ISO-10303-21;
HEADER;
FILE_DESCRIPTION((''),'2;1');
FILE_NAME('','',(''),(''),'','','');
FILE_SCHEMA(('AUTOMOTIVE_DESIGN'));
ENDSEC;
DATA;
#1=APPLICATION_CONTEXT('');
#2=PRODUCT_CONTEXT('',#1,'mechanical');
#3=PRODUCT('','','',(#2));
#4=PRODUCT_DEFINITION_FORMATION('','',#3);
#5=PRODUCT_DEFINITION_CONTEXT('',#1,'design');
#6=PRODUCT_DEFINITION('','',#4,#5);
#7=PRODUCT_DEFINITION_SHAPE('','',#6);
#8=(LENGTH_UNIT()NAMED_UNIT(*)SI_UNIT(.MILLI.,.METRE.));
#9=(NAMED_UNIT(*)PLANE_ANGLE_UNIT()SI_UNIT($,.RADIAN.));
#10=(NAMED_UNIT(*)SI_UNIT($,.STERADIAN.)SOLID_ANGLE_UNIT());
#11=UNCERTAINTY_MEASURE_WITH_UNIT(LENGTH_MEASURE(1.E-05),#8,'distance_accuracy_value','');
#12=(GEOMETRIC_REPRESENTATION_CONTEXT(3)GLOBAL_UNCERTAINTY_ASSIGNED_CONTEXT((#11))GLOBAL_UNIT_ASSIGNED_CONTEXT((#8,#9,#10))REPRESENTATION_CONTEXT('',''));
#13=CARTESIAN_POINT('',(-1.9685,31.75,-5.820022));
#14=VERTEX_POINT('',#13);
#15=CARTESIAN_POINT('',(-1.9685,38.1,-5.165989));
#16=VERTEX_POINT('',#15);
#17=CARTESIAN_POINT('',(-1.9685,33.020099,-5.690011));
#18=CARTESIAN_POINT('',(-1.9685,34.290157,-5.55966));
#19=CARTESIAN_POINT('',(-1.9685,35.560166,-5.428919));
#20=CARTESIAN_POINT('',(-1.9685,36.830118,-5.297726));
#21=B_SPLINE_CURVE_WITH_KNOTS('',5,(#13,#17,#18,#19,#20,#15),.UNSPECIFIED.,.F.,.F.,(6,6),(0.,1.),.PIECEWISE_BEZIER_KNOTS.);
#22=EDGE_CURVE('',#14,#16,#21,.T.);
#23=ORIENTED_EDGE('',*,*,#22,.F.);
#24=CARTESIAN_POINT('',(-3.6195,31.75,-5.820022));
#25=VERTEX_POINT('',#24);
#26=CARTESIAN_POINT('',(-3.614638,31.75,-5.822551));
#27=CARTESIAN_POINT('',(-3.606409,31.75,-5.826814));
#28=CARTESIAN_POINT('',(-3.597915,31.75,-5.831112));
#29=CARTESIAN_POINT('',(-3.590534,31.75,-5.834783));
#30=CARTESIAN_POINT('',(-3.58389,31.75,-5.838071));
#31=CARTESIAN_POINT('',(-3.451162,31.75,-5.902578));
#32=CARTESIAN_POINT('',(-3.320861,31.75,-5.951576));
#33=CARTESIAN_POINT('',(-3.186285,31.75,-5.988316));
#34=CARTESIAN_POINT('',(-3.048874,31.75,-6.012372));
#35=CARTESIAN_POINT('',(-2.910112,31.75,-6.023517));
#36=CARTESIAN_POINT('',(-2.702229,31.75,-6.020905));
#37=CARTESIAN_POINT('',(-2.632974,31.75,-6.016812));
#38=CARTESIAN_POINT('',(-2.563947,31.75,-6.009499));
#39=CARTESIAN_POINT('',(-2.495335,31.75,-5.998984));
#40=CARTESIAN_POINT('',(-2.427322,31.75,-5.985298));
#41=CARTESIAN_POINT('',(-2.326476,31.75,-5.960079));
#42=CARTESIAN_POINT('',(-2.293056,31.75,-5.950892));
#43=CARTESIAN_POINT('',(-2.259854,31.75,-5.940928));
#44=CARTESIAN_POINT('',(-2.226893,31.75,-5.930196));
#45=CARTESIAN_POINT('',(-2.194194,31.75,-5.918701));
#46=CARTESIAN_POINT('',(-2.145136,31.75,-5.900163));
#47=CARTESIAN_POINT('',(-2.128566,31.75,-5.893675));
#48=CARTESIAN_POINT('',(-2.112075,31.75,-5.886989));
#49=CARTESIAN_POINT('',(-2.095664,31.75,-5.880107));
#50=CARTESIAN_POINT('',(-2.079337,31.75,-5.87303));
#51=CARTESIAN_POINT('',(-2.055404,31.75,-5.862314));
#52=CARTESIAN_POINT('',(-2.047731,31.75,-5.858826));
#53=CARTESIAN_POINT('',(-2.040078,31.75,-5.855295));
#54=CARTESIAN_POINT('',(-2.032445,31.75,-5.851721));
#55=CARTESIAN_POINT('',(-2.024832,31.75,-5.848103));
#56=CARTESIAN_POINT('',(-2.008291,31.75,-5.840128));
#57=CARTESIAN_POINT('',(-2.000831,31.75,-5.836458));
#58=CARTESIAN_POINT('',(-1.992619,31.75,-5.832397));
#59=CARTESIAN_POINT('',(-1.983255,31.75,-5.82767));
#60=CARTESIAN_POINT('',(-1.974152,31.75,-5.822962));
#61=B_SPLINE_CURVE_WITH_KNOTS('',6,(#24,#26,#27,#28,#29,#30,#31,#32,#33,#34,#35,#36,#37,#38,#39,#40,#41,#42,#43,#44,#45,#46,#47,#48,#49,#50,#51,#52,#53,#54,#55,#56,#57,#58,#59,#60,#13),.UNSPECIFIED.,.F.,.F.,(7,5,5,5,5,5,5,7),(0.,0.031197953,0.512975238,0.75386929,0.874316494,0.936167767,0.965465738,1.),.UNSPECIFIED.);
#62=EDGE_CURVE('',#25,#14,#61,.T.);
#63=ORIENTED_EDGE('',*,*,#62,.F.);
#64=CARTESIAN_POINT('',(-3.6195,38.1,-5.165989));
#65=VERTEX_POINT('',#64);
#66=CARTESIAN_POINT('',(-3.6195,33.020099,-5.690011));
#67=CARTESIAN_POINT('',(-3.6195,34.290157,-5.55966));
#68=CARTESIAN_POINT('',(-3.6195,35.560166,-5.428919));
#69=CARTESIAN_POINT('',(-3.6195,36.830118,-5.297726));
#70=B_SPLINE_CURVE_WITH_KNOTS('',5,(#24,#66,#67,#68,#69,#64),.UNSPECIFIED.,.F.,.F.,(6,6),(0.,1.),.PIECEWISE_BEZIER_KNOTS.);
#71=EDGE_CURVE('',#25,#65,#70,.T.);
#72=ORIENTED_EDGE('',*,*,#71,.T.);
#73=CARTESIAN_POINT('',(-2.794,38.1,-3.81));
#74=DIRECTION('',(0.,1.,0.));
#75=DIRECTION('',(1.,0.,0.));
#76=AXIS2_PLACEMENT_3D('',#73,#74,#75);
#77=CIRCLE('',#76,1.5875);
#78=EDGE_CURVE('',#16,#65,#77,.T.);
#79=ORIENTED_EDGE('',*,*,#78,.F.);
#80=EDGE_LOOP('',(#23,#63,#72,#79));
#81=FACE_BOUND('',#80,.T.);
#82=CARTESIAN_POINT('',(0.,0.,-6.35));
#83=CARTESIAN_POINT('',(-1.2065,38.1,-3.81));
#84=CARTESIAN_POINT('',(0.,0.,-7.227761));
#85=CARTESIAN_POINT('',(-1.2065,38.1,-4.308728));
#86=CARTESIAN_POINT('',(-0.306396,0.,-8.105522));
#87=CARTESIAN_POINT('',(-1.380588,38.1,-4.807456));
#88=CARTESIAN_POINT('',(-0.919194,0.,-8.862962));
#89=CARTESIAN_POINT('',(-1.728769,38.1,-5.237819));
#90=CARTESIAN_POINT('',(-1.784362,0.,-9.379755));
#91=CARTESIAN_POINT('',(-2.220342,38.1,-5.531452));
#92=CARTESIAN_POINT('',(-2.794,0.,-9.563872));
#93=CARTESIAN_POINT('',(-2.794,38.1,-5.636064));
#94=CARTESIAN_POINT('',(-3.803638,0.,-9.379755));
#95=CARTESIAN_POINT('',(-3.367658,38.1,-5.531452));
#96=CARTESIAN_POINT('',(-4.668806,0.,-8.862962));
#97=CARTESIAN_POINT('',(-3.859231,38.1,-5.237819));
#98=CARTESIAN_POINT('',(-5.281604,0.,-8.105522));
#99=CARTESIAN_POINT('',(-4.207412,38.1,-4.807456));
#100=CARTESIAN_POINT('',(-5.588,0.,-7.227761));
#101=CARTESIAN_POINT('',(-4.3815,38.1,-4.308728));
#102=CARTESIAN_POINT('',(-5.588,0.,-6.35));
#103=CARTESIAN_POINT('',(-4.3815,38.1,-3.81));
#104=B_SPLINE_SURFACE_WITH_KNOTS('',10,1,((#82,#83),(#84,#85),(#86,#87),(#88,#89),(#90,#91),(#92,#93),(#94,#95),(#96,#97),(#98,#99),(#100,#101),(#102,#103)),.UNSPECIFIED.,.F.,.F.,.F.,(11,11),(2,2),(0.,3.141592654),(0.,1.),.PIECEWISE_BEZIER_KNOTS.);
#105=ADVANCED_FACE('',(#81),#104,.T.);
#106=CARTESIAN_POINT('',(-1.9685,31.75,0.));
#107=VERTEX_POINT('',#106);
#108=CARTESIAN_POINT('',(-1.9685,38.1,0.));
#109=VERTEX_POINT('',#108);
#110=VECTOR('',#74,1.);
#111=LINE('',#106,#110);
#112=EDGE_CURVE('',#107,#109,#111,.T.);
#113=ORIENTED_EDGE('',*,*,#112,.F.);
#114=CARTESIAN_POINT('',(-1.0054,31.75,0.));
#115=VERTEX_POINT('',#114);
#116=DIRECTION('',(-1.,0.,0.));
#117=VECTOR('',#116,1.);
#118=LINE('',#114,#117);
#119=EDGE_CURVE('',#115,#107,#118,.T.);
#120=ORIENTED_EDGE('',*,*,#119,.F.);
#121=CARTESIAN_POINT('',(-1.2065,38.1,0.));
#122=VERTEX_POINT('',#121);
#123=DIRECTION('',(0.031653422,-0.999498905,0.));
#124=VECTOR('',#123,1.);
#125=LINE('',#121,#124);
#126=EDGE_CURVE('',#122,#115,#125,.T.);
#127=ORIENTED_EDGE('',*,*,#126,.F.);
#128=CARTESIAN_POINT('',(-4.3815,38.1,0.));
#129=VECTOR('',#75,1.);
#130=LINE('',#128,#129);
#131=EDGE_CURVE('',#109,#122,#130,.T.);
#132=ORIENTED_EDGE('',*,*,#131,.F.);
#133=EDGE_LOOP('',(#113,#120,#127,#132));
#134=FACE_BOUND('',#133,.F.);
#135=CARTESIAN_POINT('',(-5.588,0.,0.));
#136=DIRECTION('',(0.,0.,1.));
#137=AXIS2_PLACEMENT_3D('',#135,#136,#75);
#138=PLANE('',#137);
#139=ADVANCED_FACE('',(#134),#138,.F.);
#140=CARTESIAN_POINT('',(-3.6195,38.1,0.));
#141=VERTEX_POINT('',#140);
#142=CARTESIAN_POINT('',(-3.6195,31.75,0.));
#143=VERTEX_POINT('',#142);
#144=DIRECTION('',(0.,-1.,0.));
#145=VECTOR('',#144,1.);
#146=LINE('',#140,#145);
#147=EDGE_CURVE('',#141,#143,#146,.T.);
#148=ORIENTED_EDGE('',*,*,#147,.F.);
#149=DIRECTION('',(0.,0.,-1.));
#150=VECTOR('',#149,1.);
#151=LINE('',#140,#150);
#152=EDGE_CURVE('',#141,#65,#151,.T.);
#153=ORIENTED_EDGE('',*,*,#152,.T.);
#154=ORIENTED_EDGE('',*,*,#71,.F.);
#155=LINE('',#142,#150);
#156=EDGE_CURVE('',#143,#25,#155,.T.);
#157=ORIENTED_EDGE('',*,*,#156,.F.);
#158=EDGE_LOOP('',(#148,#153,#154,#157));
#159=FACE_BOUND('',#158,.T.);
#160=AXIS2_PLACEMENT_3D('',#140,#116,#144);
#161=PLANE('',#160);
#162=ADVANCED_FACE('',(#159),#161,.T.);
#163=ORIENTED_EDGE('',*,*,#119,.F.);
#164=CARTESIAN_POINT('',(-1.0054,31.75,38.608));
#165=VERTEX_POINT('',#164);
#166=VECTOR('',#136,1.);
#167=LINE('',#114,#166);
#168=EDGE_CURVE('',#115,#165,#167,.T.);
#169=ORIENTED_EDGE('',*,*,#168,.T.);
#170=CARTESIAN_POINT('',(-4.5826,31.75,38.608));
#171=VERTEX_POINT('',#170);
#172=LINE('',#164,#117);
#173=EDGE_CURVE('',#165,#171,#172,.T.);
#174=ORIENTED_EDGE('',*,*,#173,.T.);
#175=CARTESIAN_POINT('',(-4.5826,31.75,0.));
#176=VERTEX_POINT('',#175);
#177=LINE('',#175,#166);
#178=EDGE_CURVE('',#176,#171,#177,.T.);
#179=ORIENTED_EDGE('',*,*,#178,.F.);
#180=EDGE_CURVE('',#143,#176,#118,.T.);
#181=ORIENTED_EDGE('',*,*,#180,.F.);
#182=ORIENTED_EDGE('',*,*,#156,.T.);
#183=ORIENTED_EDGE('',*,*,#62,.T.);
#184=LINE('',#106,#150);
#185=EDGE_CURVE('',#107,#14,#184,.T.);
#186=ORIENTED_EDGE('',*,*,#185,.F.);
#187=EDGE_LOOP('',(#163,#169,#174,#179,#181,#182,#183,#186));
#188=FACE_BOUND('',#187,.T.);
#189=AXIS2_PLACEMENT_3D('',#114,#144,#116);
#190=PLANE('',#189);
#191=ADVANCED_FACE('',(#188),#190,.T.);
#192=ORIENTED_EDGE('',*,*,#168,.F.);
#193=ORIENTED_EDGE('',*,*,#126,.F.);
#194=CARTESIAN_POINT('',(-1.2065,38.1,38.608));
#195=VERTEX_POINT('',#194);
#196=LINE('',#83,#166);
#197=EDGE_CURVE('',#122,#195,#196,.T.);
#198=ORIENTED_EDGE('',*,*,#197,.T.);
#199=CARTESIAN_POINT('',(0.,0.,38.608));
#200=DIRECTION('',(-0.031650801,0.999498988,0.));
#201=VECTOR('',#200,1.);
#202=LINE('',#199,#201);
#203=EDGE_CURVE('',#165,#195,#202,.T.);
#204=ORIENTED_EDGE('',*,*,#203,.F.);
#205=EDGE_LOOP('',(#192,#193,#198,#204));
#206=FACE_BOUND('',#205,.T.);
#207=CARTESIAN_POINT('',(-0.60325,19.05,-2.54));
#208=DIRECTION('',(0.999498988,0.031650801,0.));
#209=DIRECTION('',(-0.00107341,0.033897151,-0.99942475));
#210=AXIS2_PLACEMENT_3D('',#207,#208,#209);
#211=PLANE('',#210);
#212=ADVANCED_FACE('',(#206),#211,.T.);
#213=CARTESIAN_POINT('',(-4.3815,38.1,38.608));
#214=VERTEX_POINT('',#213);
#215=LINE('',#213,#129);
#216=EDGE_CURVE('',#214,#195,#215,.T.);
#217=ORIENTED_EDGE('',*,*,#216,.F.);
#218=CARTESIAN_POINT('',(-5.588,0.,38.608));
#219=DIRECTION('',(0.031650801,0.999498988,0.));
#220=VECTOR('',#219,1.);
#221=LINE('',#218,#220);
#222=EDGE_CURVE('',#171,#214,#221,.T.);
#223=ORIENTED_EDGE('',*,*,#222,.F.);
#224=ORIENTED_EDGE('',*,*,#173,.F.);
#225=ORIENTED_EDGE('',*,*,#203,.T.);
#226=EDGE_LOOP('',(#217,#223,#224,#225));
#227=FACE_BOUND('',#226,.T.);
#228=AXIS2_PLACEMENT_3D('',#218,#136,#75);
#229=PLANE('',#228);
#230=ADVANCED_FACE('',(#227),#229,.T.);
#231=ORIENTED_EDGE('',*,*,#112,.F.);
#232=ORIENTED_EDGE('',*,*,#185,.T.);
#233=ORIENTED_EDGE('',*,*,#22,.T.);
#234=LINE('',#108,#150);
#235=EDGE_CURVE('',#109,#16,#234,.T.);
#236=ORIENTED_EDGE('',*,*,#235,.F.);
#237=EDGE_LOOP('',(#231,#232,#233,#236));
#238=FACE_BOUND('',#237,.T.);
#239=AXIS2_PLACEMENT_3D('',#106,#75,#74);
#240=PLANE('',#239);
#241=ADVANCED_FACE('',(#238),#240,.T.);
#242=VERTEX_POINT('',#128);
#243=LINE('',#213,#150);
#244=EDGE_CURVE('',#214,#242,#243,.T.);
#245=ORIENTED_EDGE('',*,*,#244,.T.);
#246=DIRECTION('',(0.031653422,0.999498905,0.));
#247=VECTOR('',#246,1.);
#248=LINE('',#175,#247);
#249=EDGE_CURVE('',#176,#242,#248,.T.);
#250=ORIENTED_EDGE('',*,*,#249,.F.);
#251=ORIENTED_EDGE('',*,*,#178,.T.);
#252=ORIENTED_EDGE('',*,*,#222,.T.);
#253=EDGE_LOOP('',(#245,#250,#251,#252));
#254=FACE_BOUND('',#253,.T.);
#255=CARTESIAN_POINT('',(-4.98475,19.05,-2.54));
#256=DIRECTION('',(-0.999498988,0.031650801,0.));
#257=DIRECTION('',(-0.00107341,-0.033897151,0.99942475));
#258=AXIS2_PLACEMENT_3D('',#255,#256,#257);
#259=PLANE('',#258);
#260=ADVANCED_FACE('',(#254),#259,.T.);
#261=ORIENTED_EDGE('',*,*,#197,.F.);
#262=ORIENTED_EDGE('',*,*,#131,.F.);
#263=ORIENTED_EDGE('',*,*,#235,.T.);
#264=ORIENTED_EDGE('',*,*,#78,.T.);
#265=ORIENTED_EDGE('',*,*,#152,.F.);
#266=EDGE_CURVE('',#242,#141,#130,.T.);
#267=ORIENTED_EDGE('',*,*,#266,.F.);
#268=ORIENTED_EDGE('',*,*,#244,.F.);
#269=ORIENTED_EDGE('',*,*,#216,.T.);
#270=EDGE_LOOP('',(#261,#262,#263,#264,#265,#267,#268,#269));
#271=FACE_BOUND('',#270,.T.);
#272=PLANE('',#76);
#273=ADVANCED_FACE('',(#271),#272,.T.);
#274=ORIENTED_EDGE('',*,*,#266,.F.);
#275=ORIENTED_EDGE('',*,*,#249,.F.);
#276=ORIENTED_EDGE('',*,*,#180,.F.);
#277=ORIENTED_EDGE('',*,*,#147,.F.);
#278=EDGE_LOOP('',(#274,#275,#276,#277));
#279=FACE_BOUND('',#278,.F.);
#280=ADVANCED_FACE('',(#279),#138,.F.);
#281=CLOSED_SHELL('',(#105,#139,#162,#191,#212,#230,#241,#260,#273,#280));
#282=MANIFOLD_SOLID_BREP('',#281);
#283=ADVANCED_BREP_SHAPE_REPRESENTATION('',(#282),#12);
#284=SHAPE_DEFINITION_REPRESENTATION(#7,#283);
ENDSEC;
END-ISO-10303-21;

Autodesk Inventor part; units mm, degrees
ref_plane "YZ Plane" through (0, 0, 0) normal (1, 0, 0) x (0, 1, 0)
ref_plane "XY Plane" through (0, 0, 0) normal (0, 0, 1) x (1, 0, 0)
sketch "Sketch6" plane through (0, 0, 0) normal (0, 1, 0) x (-1, 0, 0)
  line L0 (0, 0) -> (5.588, 0)
  line L1 (5.588, 0) -> (5.588, -6.35)
  line L2 (5.588, -6.35) -> (0, -6.35)
  line L3 (0, -6.35) -> (0, 0)
  arc A0 (0, -6.35) -> (5.588, -6.35) centre (2.794, -6.35) ccw
  dimension "d25" = 5.588
  dimension "d26" = 6.35
ref_plane "Work Plane1" through (0, 38.1, 0) normal (0, 1, 0) x (-1, 0, 0)
sketch "Sketch8" plane through (0, 38.1, 0) normal (0, 1, 0) x (-1, 0, 0)
  line L0 (4.3815, 0) -> (1.2065, 0)
  line L1 (1.2065, 0) -> (1.2065, -3.81)
  line L2 (1.2065, -3.81) -> (4.3815, -3.81)
  line L3 (4.3815, -3.81) -> (4.3815, 0)
  arc A0 (1.2065, -3.81) -> (4.3815, -3.81) centre (2.794, -3.81) ccw
  point P0 (0, 0)
  dimension "d27" = 3.175
  dimension "d28" = 3.81
  dimension "d49" = 1.2065
loft "Loft1" add profiles "Sketch6", "Sketch8"
sketch "Sketch9" plane through (-5.588, 0, 0) normal (0, 0, 1) x (1, 0, 0)
  line L0 (0, 0) -> (5.588, 0) projected
  line L1 (5.588, 0) -> (4.3815, 38.1) projected
  line L2 (1.2065, 38.1) -> (4.3815, 38.1) projected
  line L3 (0, 0) -> (1.2065, 38.1) projected
  line L4 (4.3815, 38.1) -> (5.588, 0) projected
  line L5 (4.5826, 31.75) -> (1.0054, 31.75)
  line L6 (0, 0) -> (1.2065, 38.1) projected
  dimension "d34" = 6.35
extrude "Extrusion5" add sketch "Sketch9" along normal blind 38.608 contours L3 L2 L1 L5
sketch "Sketch12" plane through (-2.794, 0, -6.35) normal (0, -1, 0) x (1, 0, 0)
  circle A0 centre (0, 1.9685) radius 1.27
  arc A1 (-2.794, 0) -> (2.794, 0) centre (0, 0) ccw projected
  line L0 (0, -2.794) -> (0, 1.9685)
  point P0 (2.794, 6.35)
  dimension "d44" = 2.54
  dimension "d46" = 4.7625
extrude "Extrusion8" cut sketch "Sketch12" against normal blind 10.16
sketch "Sketch13" plane through (-5.588, 0, 0) normal (0, 0, 1) x (1, 0, 0)
  line L0 (1.2065, 38.1) -> (4.3815, 38.1) projected
  line L1 (3.6195, 38.1) -> (1.9685, 38.1)
  line L2 (1.9685, 38.1) -> (1.9685, 31.75)
  line L3 (1.9685, 31.75) -> (3.6195, 31.75)
  line L4 (3.6195, 31.75) -> (3.6195, 38.1)
  line L5 (3.6195, 31.75) -> (4.5826, 31.75) construction
  line L6 (4.3815, 38.1) -> (5.588, 0) construction
  line L7 (1.9685, 31.75) -> (1.0054, 31.75) construction
  line L8 (0, 0) -> (1.2065, 38.1) construction
  line L9 (10.391, 31.75) -> (-0.9915, 31.75)
  line L10 (-0.9915, 31.75) -> (-0.9915, -4.8332)
  line L11 (-0.9915, -4.8332) -> (10.391, -4.8332)
  line L12 (10.391, -4.8332) -> (10.391, 31.75)
  line L13 (1.9685, 38.1) -> (1.2065, 38.1)
  line L14 (1.9685, 31.75) -> (1.0054, 31.75)
  line L15 (1.0054, 31.75) -> (1.2065, 38.1)
  line L16 (3.6195, 38.1) -> (4.3815, 38.1)
  line L17 (4.3815, 38.1) -> (4.5826, 31.75)
  line L18 (3.6195, 31.75) -> (4.5826, 31.75)
  dimension "d50" = 1.651
  dimension "d51" = 6.35
extrude "Extrusion11" cut sketch "Sketch13" against normal through all contours L0 L2 L9 L15 | L0 L17 L9 L4
extrude "Extrusion12" cut sketch "Sketch13" against normal through all contours L9 L3 L12 L11 L10
properties part number "RudderStabilizingFinBottom_Print2"
